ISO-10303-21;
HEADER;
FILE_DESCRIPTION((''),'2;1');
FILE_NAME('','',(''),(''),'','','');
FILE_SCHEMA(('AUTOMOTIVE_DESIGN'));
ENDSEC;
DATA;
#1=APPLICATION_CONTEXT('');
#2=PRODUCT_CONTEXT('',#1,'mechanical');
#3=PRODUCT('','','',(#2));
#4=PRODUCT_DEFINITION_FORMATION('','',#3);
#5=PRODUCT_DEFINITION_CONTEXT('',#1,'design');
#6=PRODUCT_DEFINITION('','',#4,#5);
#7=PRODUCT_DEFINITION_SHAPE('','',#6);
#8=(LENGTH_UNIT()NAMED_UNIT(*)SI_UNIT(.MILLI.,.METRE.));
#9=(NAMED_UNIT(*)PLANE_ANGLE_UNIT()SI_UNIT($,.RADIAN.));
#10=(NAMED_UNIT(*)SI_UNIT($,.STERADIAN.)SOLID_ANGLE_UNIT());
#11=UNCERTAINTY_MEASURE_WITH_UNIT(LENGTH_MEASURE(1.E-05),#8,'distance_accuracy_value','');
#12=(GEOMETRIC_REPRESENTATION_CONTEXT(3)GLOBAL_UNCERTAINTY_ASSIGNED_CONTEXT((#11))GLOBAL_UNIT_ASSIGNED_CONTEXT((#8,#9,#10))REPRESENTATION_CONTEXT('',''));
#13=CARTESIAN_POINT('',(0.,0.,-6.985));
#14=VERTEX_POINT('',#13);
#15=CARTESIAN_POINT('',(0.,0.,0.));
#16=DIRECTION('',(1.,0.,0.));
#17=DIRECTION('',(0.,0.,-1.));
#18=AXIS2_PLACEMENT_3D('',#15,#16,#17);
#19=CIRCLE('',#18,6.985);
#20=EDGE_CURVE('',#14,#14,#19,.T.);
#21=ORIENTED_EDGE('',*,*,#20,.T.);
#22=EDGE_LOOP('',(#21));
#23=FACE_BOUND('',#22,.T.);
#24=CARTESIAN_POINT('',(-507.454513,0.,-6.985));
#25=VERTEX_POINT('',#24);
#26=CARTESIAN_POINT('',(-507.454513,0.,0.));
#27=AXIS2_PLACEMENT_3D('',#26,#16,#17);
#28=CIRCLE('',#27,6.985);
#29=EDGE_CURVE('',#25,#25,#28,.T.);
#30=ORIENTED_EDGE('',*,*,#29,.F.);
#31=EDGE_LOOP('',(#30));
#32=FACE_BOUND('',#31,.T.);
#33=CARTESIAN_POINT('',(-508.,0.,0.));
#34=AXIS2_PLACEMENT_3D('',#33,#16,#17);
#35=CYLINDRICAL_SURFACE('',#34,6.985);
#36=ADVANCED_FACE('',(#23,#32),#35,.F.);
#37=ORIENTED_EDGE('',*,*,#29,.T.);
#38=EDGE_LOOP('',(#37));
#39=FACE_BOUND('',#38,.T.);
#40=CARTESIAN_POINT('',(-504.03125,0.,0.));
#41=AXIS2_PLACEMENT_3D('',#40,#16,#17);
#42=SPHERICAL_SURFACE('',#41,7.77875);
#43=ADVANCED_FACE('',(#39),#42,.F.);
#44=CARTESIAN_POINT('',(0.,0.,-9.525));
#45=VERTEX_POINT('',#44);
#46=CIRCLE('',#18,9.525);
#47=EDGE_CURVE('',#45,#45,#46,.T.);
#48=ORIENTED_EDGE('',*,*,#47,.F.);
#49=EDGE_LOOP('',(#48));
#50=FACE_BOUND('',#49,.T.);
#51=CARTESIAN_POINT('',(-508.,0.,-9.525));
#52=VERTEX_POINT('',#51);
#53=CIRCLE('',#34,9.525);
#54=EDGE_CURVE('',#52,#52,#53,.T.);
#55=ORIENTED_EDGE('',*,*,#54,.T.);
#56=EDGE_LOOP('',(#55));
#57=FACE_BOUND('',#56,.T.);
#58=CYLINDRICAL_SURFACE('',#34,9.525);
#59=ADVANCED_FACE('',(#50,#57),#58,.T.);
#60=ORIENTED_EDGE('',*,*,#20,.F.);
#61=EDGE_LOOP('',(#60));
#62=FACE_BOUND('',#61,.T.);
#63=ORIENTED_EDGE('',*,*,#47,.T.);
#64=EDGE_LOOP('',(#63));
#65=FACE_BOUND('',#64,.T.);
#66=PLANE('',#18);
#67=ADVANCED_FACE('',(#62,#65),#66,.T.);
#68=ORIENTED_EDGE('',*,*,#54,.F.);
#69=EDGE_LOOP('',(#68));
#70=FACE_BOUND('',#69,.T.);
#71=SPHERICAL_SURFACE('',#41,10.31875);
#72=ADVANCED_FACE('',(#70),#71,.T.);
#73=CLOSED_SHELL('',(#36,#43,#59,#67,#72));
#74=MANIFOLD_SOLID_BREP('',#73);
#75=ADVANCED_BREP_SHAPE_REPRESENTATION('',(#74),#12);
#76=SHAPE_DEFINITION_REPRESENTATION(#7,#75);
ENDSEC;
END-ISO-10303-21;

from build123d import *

# Parameters (mm, degrees)
SKETCH1_R           = 9.525
BOSS_EXTRUDE1_DEPTH = 508
DOME1_FACE_RADIUS   = 9.525
DOME1_HEIGHT        = 6.35


# Read off the part's stored shape, not the designer's step: Shell1
with BuildPart() as part:
    # Sketch1 → Boss-Extrude1 (new body)
    with BuildSketch(Plane(origin=(0, 0, 0), x_dir=(0, 0, -1), z_dir=(1, 0, 0))):
        Circle(SKETCH1_R)
    extrude(amount=-BOSS_EXTRUDE1_DEPTH)

    # Dome1: a dome of height H over a round flat face of radius A is a cap of a sphere of radius (A * A + H * H) / (2 * H)
    dome1_r = (DOME1_FACE_RADIUS * DOME1_FACE_RADIUS + DOME1_HEIGHT * DOME1_HEIGHT) / (2 * DOME1_HEIGHT)
    dome1_base = Plane((-508, 0, 0), z_dir=(-1, 0, 0))
    with Locations(dome1_base.offset(DOME1_HEIGHT - dome1_r)):
        dome1_ball = Sphere(dome1_r, mode=Mode.PRIVATE)
    add(split(dome1_ball, bisect_by=dome1_base, keep=Keep.TOP, mode=Mode.PRIVATE))

    # Shell1 outline → Shell1 (revolve, cut)
    with BuildSketch(Plane.YX):
        with BuildLine():
            ThreePointArc((0, -511.81), (4.115838187, -510.631918722), (6.985000003, -507.454512554))
            Line((6.985000003, -507.454512554), (6.985, 0))
            Line((6.985, 0), (0, 0))
            Line((0, 0), (0, -511.81))
        make_face()
    revolve(axis=Axis((0, 0, 0), (1, 0, 0)), mode=Mode.SUBTRACT)


solid = part.part
